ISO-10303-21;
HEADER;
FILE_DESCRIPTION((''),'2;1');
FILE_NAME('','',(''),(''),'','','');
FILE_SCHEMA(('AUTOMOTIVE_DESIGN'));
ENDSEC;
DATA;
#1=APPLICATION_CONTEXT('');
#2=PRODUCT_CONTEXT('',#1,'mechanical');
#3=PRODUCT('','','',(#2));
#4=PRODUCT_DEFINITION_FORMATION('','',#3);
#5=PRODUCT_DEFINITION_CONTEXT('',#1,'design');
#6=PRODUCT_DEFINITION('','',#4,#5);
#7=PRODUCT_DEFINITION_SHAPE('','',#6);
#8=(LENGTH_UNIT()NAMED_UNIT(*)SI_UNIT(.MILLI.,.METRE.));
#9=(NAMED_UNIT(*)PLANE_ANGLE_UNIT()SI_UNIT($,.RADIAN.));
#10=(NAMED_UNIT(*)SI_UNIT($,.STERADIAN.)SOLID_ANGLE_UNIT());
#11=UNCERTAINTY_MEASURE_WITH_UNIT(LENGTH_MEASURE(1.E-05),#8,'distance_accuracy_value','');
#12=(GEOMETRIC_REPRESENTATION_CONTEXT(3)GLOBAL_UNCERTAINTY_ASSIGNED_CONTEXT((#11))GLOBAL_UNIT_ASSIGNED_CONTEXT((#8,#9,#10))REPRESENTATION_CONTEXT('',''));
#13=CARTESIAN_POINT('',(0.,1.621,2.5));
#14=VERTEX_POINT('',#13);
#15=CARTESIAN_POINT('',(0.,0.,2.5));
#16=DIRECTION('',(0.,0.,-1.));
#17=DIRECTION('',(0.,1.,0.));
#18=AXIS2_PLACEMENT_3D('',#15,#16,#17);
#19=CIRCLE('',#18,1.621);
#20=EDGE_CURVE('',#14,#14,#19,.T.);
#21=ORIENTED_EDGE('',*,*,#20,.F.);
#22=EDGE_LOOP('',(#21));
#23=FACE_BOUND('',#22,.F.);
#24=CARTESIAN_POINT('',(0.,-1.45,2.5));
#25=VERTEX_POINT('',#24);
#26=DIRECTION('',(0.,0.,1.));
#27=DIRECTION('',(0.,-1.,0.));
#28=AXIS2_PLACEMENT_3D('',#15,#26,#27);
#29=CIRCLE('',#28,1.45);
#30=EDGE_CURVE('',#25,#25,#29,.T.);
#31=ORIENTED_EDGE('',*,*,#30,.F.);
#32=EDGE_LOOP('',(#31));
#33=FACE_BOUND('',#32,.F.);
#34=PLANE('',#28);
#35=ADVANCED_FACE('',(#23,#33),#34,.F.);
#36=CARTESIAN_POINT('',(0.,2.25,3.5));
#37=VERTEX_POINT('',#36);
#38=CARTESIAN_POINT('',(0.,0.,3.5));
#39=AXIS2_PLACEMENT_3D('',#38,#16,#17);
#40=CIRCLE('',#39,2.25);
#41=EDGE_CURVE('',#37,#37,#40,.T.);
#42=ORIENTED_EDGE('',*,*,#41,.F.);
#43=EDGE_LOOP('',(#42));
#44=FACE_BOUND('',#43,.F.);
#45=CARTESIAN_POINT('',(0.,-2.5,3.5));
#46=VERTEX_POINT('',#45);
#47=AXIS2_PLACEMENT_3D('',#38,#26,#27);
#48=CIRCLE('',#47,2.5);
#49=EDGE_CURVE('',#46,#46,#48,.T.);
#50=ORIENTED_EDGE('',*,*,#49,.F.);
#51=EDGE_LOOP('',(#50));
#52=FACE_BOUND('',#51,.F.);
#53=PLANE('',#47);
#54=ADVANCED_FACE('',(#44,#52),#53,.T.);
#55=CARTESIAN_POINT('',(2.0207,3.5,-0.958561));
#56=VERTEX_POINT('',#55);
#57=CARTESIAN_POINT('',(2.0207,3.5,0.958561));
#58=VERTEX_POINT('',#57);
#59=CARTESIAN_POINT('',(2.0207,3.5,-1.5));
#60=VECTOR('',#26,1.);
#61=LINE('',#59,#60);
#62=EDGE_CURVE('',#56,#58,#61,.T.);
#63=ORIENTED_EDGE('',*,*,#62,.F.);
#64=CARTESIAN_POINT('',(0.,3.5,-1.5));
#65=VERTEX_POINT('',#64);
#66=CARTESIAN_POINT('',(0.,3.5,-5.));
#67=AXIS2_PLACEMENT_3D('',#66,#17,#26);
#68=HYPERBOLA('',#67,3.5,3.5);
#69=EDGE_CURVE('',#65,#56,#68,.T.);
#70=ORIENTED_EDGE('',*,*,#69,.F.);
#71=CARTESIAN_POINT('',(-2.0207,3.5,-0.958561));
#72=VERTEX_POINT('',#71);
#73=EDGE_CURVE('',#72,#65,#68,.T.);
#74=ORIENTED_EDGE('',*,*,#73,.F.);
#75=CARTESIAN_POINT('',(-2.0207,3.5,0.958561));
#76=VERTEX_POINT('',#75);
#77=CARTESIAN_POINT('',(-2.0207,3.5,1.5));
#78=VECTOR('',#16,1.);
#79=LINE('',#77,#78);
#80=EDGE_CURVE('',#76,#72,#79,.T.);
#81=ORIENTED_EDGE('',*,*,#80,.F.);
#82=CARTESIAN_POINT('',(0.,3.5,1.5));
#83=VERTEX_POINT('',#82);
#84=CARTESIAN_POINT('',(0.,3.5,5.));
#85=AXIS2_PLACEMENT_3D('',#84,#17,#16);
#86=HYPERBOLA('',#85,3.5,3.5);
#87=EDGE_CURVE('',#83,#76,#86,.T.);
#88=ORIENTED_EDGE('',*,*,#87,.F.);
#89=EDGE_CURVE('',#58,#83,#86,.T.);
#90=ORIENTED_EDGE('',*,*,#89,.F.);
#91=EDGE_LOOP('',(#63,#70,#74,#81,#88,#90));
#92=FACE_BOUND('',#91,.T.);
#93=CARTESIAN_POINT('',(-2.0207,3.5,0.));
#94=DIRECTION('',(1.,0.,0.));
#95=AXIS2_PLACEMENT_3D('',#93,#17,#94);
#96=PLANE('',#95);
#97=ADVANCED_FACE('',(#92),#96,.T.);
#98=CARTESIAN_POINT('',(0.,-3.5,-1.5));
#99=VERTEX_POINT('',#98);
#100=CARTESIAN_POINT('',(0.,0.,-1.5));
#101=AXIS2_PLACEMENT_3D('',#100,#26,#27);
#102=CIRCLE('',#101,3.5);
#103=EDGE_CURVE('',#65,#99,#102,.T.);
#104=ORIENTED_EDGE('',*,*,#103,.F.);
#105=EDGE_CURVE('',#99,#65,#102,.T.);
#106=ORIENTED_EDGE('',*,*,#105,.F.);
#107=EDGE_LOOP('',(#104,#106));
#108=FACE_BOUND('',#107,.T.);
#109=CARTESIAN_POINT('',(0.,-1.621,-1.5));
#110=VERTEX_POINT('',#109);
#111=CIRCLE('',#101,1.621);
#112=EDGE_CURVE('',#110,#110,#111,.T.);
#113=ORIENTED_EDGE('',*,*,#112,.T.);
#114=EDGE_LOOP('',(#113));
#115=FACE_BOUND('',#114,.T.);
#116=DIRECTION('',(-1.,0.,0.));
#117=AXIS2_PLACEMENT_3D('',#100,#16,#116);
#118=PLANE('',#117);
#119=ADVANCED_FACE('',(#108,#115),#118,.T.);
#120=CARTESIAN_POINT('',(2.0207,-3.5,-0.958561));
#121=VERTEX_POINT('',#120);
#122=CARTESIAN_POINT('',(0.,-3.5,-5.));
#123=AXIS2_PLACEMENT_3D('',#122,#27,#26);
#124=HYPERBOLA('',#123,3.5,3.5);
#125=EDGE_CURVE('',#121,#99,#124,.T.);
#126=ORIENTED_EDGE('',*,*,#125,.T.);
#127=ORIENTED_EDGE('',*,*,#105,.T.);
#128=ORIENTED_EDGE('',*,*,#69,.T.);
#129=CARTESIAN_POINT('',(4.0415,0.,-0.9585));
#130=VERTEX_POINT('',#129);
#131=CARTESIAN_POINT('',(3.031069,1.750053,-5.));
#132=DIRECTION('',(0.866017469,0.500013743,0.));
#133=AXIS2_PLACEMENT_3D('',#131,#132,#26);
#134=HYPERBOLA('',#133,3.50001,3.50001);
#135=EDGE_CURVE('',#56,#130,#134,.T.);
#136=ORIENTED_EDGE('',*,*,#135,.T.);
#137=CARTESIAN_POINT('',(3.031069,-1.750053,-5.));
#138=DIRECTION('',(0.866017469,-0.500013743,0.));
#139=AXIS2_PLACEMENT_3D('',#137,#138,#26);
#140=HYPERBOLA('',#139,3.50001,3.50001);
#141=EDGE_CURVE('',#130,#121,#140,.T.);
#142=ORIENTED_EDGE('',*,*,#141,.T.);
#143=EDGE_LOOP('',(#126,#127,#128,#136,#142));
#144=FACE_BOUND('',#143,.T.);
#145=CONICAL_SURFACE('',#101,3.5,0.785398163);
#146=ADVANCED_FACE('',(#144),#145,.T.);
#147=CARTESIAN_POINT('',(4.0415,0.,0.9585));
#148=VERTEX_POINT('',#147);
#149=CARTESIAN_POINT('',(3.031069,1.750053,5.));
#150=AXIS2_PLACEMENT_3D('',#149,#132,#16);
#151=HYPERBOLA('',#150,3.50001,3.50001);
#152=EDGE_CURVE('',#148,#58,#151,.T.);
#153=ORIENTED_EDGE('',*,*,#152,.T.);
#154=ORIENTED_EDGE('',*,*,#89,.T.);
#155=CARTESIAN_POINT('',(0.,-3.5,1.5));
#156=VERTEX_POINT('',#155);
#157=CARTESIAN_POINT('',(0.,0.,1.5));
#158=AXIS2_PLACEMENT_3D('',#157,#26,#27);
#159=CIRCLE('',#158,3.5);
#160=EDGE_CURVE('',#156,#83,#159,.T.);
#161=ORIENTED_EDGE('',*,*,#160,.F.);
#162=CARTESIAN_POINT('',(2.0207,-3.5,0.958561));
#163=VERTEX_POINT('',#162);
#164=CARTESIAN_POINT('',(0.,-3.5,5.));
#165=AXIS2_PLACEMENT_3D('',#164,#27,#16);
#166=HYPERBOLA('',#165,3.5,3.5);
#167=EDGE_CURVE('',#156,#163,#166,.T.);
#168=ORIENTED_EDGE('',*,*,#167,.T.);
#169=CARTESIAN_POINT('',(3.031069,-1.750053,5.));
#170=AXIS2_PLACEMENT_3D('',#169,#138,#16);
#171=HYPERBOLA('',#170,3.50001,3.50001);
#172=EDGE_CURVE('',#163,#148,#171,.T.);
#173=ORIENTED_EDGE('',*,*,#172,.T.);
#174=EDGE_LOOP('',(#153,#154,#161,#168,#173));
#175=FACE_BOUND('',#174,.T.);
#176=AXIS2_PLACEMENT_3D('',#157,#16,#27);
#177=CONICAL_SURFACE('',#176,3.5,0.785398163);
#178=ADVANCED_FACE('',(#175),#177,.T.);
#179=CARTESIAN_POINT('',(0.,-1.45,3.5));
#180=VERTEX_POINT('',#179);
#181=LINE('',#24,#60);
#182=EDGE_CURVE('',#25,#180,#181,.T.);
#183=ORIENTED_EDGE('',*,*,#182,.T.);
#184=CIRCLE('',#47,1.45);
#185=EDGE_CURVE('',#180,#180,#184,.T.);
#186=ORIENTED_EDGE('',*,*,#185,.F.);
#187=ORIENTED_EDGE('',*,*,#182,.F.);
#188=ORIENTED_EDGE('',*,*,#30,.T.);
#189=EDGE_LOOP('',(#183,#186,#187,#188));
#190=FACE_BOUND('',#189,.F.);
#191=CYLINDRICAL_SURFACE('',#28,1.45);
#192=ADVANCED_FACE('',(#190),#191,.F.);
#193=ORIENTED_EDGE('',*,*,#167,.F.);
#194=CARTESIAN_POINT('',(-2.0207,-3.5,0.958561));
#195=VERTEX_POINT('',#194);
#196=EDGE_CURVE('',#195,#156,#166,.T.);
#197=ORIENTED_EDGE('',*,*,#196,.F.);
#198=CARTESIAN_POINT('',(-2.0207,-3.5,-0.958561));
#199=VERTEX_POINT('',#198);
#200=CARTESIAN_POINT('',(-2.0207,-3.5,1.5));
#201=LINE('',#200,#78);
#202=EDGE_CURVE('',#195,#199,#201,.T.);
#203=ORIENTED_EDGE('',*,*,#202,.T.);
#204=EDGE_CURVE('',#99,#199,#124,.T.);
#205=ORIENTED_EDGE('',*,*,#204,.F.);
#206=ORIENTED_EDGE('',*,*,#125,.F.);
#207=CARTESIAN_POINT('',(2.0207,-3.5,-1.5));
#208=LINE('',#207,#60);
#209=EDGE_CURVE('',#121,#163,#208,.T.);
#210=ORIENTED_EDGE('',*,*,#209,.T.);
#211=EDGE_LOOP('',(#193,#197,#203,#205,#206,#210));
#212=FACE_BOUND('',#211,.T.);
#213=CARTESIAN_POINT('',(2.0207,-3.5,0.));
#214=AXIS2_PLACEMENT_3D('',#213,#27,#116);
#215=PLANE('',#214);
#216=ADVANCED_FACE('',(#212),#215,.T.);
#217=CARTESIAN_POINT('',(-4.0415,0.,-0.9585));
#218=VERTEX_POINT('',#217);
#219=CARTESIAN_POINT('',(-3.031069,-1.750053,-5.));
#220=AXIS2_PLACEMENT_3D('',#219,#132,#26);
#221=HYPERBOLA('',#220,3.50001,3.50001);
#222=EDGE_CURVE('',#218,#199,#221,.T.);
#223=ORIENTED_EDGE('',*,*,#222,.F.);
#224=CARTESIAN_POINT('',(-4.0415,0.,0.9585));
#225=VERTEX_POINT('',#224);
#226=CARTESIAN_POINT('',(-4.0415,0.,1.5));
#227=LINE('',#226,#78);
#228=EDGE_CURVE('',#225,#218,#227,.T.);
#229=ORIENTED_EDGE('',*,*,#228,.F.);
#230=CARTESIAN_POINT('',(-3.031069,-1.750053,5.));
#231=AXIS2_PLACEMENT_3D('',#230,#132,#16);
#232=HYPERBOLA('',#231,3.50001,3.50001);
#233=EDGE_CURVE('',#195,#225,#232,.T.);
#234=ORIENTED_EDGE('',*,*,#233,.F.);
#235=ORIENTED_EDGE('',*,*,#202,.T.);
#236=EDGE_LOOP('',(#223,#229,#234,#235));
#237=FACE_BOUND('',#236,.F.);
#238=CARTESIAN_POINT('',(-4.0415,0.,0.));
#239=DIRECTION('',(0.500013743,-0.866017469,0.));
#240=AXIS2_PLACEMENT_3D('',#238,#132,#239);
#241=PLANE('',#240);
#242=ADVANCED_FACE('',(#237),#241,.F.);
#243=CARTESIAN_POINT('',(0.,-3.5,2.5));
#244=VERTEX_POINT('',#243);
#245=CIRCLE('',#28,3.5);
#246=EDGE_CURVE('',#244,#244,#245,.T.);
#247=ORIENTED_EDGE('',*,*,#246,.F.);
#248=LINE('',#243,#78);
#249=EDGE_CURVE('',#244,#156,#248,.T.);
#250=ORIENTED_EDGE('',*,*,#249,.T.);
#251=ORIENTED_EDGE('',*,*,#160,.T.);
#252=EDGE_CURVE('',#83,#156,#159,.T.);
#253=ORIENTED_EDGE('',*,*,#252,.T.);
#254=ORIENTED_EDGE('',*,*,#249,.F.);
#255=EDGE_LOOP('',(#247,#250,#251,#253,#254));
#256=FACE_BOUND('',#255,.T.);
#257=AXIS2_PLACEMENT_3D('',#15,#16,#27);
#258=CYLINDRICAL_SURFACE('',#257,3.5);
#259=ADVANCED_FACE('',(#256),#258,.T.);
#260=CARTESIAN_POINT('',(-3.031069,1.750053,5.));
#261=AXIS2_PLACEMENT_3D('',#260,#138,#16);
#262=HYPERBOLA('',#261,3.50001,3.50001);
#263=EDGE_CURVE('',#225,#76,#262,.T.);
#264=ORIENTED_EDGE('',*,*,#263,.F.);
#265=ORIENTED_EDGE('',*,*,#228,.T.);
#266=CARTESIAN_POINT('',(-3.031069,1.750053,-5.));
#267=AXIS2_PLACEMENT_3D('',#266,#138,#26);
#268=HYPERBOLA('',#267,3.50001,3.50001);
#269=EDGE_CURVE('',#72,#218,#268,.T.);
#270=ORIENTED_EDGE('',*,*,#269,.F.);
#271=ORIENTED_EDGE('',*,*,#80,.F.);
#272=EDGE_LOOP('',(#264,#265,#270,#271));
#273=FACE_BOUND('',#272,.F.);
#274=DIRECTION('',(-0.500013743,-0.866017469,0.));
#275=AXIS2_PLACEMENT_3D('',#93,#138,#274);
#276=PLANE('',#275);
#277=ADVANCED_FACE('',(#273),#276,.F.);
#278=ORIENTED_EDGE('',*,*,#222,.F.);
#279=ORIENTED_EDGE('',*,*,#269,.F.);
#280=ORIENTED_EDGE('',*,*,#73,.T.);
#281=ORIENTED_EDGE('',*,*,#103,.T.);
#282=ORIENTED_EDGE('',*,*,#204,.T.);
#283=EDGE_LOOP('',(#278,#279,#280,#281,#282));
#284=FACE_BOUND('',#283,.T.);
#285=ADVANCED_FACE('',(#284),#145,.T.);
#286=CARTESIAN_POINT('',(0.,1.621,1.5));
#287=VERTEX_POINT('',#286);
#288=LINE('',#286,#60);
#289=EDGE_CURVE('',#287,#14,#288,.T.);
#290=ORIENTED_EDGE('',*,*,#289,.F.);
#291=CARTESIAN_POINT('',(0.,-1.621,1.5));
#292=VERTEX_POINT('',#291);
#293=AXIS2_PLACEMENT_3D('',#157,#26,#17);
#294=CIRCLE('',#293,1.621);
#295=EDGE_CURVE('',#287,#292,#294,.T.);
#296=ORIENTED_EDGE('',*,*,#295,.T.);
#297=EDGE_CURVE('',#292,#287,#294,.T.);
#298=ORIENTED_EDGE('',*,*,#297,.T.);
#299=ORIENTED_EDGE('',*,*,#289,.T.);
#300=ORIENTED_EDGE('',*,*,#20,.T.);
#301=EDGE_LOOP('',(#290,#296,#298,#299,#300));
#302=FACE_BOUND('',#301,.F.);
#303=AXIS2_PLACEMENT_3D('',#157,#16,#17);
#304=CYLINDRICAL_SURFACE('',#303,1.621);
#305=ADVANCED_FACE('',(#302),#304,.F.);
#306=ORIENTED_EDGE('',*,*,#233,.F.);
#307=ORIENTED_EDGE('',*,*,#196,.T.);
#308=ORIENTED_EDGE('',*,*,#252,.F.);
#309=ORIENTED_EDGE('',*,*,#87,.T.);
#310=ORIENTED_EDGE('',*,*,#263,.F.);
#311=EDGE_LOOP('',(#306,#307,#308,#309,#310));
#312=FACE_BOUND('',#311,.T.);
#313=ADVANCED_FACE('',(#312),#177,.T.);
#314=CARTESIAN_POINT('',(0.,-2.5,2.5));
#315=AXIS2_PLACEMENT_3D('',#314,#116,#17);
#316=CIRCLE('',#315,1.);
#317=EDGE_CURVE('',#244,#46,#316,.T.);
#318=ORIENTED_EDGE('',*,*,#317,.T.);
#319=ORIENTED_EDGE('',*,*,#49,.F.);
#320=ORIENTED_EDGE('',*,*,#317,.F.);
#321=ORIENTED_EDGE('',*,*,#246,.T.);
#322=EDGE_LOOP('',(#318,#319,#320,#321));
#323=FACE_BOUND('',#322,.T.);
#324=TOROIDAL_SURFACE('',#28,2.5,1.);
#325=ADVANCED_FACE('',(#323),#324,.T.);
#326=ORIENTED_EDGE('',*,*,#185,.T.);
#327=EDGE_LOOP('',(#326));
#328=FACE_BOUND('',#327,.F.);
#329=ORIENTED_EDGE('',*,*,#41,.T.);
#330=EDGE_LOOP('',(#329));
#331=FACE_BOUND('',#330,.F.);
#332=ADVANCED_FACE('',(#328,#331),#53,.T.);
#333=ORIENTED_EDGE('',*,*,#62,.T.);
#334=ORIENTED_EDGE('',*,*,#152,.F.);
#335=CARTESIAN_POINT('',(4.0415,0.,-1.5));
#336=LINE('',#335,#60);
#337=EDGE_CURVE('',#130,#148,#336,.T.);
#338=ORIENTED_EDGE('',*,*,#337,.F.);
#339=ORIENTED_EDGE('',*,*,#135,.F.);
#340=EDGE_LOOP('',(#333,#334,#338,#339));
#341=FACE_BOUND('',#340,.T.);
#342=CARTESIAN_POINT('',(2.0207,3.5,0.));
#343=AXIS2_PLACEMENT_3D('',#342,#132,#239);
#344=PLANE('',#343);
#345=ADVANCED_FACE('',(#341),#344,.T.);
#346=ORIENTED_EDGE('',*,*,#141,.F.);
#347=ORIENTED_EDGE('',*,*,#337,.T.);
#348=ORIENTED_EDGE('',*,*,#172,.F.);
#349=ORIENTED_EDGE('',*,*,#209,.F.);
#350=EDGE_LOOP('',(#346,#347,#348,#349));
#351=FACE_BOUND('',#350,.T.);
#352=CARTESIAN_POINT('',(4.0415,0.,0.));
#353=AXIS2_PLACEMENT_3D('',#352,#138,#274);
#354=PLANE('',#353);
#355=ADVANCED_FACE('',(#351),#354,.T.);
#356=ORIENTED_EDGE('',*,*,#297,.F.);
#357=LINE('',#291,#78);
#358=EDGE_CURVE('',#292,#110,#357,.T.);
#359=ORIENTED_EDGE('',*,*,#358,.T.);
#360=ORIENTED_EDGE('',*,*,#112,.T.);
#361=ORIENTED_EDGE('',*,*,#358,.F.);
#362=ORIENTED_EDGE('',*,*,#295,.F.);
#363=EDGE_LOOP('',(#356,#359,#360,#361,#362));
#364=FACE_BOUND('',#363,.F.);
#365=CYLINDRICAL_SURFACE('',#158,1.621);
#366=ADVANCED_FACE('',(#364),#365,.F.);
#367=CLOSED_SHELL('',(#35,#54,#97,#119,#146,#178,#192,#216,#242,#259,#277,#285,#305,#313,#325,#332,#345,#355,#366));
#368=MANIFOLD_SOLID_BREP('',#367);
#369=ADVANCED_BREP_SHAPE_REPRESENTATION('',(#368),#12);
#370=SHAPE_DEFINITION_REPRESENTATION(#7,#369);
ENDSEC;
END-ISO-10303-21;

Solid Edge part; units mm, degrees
sketch "Sketch1" plane through (0, 0, 0) normal (0, 0, 1) x (1, 0, 0)
  line L0 (2.0207, -3.5) -> (-2.0207, -3.5)
  line L1 (-4.0415, 0) -> (-2.0207, -3.5)
  line L2 (-2.0207, 3.5) -> (-4.0415, 0)
  line L3 (-2.0207, 3.5) -> (2.0207, 3.5)
  line L4 (2.0207, 3.5) -> (4.0415, 0)
  line L5 (4.0415, 0) -> (2.0207, -3.5)
extrude "Protrusion1" add sketch "Sketch1" along normal mid plane 3
sketch "Sketch2" plane through (0, 0, 0) normal (1, 0, 0) x (0, 1, 0)
  line L0 (-3.5, 1.5) -> (-1.7635, 3.2365)
revolve "RevolvedCutout1" cut sketch "Sketch2" angle 360 about axis through (0, 0, -57) along (0, 0, 1) material side at (0, -2.6671, 2.4036)
mirror "Mirror1" about plane through (0, 0, 0) normal (0, 0, 1) of "RevolvedCutout1"
sketch "Sketch3" plane through (0, 0, 0) normal (1, 0, 0) x (0, 1, 0)
  line L0 (0, 1.5) -> (0, 3.5)
  line L1 (0, 3.5) -> (-2.5, 3.5)
  arc A0 (-3.5, 2.5) -> (-2.5, 3.5) centre (-2.5, 2.5) cw
  line L2 (-3.5, 2.5) -> (-3.5, 1.5)
  line L3 (-3.5, 1.5) -> (0, 1.5)
  dimension "D1" = 2
revolve "RevolvedProtrusion1" add sketch "Sketch3" angle 360 about axis through (0, 0, -57) along (0, 0, 1)
hole "Hole_1" at (0, 0, 1.5) direction (0, 0, 1) diameter 3.242 end through all both ways yes
sketch "Sketch4" plane through (0, 0, 3.5) normal (0, 0, 1) x (0, 1, 0)
  circle A0 centre (0, 0) radius 2.25
extrude "ExtrudedCutout_1" cut sketch "Sketch4" against normal blind 1
sketch "Sketch5" plane through (0, 0, 0) normal (1, 0, 0) x (0, 1, 0)
  line L0 (-2.25, 2.5) -> (-1.45, 2.5)
  line L1 (-1.45, 2.5) -> (-1.45, 3.5)
  line L2 (-1.45, 3.5) -> (-2.25, 3.5)
  line L3 (-2.25, 3.5) -> (-2.25, 2.5)
revolve "RevolvedProtrusion2" add sketch "Sketch5" angle 360 about axis through (0, 0, -57) along (0, 0, 1)
